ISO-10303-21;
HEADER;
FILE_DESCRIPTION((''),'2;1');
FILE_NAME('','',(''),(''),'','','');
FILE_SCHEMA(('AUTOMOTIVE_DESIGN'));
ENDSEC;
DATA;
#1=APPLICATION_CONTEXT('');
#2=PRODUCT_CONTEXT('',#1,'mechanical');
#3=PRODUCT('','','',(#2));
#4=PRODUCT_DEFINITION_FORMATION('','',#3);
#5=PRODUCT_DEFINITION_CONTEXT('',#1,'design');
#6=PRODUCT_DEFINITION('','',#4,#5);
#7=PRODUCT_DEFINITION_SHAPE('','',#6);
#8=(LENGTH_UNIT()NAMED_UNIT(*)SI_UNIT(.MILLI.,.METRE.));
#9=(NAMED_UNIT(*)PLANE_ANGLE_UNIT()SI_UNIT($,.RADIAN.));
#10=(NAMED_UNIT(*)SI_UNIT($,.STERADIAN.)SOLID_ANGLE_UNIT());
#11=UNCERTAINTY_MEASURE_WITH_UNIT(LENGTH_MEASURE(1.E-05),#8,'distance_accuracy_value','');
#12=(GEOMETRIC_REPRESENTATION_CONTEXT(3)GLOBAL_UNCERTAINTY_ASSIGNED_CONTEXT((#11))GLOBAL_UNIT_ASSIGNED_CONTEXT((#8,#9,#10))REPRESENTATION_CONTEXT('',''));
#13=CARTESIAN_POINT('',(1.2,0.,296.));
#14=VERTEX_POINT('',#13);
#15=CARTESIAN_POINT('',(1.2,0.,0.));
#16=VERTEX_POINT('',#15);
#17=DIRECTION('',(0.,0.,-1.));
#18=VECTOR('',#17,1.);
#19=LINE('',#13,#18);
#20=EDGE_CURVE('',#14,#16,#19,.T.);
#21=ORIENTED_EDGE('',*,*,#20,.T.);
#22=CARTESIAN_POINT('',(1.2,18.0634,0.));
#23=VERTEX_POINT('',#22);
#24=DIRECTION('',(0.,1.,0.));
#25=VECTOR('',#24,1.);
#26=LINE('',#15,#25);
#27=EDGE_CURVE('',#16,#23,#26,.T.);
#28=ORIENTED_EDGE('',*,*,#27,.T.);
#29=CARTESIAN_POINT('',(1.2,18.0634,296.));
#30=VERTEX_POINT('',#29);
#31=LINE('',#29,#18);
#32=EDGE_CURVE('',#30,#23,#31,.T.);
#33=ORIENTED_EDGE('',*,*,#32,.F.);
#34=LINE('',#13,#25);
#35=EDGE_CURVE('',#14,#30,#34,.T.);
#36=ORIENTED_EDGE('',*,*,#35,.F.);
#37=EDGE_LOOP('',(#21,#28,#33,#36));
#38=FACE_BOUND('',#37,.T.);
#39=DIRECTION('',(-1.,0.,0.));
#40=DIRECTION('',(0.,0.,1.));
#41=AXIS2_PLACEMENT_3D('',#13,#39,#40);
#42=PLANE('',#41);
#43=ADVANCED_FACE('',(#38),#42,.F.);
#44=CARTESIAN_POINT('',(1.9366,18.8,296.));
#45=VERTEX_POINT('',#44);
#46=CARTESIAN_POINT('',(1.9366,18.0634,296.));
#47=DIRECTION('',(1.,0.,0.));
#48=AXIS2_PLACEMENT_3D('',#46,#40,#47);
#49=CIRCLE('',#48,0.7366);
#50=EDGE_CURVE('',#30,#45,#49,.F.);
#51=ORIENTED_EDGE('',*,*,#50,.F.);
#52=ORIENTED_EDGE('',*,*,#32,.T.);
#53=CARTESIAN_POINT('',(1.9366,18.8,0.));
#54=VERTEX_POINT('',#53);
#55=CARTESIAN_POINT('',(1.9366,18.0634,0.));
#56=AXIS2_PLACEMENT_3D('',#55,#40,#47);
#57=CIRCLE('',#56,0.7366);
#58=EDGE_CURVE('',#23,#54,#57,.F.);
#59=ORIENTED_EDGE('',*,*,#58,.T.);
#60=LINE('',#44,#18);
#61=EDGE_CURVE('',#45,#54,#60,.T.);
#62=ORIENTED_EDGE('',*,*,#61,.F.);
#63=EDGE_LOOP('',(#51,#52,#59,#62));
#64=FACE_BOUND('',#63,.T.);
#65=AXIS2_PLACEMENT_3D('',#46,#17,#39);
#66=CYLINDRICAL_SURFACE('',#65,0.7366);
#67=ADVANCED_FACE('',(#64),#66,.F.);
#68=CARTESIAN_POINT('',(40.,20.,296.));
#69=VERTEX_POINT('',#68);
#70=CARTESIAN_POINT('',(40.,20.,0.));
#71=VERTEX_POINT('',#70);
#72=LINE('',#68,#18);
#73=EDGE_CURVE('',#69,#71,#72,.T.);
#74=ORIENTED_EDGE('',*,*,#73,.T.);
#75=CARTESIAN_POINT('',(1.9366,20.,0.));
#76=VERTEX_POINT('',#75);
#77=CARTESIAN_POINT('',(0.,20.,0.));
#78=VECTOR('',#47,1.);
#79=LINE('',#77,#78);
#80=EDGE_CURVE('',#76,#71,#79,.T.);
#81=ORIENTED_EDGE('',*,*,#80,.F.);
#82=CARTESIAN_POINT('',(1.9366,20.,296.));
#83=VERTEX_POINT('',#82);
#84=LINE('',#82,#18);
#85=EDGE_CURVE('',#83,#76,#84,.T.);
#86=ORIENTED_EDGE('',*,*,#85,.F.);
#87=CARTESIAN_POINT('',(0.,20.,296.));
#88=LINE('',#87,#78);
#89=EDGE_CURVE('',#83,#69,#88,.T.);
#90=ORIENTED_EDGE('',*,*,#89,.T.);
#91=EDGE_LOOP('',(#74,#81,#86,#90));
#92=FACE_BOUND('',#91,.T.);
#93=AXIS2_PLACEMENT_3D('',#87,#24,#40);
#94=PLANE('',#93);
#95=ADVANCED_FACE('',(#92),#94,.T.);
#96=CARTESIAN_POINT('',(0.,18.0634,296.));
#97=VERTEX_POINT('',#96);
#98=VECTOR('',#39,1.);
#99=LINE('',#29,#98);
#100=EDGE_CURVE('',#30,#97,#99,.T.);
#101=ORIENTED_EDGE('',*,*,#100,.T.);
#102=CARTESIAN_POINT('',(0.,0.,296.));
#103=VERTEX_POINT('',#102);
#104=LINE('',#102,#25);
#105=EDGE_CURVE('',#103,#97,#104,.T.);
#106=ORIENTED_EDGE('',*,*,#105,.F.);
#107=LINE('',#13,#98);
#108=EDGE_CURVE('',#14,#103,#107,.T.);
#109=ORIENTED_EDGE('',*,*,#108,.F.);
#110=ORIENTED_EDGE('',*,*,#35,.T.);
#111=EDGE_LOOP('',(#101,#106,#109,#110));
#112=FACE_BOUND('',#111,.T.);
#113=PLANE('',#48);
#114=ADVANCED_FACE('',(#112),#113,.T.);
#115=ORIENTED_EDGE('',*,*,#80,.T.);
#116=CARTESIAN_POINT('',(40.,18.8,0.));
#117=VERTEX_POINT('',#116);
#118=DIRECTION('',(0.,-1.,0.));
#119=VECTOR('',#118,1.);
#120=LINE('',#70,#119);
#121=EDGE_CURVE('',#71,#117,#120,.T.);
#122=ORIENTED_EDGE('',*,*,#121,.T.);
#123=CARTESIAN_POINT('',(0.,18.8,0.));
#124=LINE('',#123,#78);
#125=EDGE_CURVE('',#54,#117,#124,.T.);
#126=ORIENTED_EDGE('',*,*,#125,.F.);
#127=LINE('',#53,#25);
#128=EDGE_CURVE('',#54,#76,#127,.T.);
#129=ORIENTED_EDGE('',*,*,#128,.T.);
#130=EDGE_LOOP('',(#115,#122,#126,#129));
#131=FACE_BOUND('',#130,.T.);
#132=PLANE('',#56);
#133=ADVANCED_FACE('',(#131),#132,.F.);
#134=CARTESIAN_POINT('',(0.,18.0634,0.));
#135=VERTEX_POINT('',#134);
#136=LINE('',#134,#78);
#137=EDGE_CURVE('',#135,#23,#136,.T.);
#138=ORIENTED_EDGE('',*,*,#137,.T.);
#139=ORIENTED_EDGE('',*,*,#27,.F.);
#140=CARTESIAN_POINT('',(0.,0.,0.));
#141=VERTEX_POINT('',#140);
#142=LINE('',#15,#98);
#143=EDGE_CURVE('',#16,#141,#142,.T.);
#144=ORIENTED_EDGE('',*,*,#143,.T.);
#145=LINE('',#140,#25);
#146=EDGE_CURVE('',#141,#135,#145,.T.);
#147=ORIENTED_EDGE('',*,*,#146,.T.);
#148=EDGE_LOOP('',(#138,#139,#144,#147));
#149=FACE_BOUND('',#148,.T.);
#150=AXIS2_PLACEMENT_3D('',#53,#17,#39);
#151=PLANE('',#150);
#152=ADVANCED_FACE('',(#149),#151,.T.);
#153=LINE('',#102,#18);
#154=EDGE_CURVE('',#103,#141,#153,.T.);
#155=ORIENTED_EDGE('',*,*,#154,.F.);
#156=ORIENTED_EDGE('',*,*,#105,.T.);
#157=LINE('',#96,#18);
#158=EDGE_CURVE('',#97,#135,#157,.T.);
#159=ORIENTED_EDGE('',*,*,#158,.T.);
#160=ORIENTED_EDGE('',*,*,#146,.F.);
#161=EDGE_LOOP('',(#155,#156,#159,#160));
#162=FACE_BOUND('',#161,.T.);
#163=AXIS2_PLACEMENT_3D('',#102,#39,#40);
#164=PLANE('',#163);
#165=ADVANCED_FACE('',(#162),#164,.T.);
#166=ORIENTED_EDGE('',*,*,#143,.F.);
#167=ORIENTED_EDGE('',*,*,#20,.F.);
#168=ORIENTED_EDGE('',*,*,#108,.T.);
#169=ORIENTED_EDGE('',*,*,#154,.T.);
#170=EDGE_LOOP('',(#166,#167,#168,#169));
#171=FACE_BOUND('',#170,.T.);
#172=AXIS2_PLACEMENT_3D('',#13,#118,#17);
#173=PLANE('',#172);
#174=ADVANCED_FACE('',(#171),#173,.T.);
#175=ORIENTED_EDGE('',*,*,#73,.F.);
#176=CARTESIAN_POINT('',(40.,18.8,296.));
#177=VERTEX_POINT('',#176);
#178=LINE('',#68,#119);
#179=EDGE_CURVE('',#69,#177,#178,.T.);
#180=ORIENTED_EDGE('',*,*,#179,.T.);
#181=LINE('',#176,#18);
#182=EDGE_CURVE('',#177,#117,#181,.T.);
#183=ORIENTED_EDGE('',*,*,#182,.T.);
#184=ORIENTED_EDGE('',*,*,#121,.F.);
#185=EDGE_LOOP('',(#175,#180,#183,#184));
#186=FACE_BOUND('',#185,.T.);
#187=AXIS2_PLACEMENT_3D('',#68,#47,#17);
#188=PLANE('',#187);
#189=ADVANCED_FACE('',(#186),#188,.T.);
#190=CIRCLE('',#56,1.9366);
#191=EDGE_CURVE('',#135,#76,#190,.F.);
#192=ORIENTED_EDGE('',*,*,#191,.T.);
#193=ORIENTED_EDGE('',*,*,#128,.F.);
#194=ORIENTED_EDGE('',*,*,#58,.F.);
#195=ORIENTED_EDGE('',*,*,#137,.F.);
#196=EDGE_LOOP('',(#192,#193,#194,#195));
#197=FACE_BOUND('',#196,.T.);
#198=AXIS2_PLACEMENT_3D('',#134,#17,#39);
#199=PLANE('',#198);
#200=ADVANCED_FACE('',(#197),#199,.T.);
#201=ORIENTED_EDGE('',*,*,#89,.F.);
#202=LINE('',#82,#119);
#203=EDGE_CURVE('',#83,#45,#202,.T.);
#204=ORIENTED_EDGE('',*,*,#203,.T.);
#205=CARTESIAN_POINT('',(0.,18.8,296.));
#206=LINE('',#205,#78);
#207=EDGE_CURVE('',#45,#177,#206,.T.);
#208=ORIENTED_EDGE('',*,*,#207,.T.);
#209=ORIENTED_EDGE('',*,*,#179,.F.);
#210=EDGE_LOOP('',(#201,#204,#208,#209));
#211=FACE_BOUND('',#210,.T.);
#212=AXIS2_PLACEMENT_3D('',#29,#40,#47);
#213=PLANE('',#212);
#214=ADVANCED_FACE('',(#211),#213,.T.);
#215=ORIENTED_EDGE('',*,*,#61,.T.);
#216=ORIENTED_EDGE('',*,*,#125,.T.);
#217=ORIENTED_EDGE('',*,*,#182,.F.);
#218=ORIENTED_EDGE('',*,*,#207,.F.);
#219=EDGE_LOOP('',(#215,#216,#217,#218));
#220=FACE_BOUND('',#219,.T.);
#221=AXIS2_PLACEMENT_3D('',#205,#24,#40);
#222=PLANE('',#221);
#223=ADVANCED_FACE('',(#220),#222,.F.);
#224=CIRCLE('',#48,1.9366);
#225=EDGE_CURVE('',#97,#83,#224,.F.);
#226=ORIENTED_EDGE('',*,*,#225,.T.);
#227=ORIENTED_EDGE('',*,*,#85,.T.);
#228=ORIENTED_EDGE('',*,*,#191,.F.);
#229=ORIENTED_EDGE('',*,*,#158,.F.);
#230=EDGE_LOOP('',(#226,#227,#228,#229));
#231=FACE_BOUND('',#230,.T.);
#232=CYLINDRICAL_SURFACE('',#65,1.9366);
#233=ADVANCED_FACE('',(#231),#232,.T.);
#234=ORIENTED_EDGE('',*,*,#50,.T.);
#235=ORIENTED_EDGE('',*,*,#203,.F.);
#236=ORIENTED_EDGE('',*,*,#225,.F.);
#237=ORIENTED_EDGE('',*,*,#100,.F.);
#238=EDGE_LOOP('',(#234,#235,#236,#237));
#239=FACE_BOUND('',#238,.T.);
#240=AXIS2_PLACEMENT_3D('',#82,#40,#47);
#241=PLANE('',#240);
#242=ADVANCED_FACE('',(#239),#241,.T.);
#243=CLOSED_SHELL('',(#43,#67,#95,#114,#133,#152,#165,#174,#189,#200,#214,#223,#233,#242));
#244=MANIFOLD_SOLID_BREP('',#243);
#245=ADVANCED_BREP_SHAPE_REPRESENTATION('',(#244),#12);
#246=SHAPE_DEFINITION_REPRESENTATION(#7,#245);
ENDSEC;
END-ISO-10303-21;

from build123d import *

# Parameters (mm, degrees)
BASE_FLANGE1_DEPTH = 296


# Sheet-metal steps are written as plain solids
with BuildPart() as part:
    # Sketch1 → Base-Flange1 (new body)
    with BuildSketch(Plane.XY):
        with BuildLine():
            Line((0, 0), (0, 18.0634))
            ThreePointArc((0, 18.0634), (0.567217008, 19.432782992), (1.9366, 20))
            Line((1.9366, 20), (40, 20))
            Line((40, 20), (40, 18.8))
            Line((40, 18.8), (1.9366, 18.8))
            ThreePointArc((1.9366, 18.8), (1.415745145, 18.584254855), (1.2, 18.0634))
            Line((1.2, 18.0634), (1.2, 0))
            Line((1.2, 0), (0, 0))
        make_face()
    extrude(amount=BASE_FLANGE1_DEPTH)


solid = part.part
